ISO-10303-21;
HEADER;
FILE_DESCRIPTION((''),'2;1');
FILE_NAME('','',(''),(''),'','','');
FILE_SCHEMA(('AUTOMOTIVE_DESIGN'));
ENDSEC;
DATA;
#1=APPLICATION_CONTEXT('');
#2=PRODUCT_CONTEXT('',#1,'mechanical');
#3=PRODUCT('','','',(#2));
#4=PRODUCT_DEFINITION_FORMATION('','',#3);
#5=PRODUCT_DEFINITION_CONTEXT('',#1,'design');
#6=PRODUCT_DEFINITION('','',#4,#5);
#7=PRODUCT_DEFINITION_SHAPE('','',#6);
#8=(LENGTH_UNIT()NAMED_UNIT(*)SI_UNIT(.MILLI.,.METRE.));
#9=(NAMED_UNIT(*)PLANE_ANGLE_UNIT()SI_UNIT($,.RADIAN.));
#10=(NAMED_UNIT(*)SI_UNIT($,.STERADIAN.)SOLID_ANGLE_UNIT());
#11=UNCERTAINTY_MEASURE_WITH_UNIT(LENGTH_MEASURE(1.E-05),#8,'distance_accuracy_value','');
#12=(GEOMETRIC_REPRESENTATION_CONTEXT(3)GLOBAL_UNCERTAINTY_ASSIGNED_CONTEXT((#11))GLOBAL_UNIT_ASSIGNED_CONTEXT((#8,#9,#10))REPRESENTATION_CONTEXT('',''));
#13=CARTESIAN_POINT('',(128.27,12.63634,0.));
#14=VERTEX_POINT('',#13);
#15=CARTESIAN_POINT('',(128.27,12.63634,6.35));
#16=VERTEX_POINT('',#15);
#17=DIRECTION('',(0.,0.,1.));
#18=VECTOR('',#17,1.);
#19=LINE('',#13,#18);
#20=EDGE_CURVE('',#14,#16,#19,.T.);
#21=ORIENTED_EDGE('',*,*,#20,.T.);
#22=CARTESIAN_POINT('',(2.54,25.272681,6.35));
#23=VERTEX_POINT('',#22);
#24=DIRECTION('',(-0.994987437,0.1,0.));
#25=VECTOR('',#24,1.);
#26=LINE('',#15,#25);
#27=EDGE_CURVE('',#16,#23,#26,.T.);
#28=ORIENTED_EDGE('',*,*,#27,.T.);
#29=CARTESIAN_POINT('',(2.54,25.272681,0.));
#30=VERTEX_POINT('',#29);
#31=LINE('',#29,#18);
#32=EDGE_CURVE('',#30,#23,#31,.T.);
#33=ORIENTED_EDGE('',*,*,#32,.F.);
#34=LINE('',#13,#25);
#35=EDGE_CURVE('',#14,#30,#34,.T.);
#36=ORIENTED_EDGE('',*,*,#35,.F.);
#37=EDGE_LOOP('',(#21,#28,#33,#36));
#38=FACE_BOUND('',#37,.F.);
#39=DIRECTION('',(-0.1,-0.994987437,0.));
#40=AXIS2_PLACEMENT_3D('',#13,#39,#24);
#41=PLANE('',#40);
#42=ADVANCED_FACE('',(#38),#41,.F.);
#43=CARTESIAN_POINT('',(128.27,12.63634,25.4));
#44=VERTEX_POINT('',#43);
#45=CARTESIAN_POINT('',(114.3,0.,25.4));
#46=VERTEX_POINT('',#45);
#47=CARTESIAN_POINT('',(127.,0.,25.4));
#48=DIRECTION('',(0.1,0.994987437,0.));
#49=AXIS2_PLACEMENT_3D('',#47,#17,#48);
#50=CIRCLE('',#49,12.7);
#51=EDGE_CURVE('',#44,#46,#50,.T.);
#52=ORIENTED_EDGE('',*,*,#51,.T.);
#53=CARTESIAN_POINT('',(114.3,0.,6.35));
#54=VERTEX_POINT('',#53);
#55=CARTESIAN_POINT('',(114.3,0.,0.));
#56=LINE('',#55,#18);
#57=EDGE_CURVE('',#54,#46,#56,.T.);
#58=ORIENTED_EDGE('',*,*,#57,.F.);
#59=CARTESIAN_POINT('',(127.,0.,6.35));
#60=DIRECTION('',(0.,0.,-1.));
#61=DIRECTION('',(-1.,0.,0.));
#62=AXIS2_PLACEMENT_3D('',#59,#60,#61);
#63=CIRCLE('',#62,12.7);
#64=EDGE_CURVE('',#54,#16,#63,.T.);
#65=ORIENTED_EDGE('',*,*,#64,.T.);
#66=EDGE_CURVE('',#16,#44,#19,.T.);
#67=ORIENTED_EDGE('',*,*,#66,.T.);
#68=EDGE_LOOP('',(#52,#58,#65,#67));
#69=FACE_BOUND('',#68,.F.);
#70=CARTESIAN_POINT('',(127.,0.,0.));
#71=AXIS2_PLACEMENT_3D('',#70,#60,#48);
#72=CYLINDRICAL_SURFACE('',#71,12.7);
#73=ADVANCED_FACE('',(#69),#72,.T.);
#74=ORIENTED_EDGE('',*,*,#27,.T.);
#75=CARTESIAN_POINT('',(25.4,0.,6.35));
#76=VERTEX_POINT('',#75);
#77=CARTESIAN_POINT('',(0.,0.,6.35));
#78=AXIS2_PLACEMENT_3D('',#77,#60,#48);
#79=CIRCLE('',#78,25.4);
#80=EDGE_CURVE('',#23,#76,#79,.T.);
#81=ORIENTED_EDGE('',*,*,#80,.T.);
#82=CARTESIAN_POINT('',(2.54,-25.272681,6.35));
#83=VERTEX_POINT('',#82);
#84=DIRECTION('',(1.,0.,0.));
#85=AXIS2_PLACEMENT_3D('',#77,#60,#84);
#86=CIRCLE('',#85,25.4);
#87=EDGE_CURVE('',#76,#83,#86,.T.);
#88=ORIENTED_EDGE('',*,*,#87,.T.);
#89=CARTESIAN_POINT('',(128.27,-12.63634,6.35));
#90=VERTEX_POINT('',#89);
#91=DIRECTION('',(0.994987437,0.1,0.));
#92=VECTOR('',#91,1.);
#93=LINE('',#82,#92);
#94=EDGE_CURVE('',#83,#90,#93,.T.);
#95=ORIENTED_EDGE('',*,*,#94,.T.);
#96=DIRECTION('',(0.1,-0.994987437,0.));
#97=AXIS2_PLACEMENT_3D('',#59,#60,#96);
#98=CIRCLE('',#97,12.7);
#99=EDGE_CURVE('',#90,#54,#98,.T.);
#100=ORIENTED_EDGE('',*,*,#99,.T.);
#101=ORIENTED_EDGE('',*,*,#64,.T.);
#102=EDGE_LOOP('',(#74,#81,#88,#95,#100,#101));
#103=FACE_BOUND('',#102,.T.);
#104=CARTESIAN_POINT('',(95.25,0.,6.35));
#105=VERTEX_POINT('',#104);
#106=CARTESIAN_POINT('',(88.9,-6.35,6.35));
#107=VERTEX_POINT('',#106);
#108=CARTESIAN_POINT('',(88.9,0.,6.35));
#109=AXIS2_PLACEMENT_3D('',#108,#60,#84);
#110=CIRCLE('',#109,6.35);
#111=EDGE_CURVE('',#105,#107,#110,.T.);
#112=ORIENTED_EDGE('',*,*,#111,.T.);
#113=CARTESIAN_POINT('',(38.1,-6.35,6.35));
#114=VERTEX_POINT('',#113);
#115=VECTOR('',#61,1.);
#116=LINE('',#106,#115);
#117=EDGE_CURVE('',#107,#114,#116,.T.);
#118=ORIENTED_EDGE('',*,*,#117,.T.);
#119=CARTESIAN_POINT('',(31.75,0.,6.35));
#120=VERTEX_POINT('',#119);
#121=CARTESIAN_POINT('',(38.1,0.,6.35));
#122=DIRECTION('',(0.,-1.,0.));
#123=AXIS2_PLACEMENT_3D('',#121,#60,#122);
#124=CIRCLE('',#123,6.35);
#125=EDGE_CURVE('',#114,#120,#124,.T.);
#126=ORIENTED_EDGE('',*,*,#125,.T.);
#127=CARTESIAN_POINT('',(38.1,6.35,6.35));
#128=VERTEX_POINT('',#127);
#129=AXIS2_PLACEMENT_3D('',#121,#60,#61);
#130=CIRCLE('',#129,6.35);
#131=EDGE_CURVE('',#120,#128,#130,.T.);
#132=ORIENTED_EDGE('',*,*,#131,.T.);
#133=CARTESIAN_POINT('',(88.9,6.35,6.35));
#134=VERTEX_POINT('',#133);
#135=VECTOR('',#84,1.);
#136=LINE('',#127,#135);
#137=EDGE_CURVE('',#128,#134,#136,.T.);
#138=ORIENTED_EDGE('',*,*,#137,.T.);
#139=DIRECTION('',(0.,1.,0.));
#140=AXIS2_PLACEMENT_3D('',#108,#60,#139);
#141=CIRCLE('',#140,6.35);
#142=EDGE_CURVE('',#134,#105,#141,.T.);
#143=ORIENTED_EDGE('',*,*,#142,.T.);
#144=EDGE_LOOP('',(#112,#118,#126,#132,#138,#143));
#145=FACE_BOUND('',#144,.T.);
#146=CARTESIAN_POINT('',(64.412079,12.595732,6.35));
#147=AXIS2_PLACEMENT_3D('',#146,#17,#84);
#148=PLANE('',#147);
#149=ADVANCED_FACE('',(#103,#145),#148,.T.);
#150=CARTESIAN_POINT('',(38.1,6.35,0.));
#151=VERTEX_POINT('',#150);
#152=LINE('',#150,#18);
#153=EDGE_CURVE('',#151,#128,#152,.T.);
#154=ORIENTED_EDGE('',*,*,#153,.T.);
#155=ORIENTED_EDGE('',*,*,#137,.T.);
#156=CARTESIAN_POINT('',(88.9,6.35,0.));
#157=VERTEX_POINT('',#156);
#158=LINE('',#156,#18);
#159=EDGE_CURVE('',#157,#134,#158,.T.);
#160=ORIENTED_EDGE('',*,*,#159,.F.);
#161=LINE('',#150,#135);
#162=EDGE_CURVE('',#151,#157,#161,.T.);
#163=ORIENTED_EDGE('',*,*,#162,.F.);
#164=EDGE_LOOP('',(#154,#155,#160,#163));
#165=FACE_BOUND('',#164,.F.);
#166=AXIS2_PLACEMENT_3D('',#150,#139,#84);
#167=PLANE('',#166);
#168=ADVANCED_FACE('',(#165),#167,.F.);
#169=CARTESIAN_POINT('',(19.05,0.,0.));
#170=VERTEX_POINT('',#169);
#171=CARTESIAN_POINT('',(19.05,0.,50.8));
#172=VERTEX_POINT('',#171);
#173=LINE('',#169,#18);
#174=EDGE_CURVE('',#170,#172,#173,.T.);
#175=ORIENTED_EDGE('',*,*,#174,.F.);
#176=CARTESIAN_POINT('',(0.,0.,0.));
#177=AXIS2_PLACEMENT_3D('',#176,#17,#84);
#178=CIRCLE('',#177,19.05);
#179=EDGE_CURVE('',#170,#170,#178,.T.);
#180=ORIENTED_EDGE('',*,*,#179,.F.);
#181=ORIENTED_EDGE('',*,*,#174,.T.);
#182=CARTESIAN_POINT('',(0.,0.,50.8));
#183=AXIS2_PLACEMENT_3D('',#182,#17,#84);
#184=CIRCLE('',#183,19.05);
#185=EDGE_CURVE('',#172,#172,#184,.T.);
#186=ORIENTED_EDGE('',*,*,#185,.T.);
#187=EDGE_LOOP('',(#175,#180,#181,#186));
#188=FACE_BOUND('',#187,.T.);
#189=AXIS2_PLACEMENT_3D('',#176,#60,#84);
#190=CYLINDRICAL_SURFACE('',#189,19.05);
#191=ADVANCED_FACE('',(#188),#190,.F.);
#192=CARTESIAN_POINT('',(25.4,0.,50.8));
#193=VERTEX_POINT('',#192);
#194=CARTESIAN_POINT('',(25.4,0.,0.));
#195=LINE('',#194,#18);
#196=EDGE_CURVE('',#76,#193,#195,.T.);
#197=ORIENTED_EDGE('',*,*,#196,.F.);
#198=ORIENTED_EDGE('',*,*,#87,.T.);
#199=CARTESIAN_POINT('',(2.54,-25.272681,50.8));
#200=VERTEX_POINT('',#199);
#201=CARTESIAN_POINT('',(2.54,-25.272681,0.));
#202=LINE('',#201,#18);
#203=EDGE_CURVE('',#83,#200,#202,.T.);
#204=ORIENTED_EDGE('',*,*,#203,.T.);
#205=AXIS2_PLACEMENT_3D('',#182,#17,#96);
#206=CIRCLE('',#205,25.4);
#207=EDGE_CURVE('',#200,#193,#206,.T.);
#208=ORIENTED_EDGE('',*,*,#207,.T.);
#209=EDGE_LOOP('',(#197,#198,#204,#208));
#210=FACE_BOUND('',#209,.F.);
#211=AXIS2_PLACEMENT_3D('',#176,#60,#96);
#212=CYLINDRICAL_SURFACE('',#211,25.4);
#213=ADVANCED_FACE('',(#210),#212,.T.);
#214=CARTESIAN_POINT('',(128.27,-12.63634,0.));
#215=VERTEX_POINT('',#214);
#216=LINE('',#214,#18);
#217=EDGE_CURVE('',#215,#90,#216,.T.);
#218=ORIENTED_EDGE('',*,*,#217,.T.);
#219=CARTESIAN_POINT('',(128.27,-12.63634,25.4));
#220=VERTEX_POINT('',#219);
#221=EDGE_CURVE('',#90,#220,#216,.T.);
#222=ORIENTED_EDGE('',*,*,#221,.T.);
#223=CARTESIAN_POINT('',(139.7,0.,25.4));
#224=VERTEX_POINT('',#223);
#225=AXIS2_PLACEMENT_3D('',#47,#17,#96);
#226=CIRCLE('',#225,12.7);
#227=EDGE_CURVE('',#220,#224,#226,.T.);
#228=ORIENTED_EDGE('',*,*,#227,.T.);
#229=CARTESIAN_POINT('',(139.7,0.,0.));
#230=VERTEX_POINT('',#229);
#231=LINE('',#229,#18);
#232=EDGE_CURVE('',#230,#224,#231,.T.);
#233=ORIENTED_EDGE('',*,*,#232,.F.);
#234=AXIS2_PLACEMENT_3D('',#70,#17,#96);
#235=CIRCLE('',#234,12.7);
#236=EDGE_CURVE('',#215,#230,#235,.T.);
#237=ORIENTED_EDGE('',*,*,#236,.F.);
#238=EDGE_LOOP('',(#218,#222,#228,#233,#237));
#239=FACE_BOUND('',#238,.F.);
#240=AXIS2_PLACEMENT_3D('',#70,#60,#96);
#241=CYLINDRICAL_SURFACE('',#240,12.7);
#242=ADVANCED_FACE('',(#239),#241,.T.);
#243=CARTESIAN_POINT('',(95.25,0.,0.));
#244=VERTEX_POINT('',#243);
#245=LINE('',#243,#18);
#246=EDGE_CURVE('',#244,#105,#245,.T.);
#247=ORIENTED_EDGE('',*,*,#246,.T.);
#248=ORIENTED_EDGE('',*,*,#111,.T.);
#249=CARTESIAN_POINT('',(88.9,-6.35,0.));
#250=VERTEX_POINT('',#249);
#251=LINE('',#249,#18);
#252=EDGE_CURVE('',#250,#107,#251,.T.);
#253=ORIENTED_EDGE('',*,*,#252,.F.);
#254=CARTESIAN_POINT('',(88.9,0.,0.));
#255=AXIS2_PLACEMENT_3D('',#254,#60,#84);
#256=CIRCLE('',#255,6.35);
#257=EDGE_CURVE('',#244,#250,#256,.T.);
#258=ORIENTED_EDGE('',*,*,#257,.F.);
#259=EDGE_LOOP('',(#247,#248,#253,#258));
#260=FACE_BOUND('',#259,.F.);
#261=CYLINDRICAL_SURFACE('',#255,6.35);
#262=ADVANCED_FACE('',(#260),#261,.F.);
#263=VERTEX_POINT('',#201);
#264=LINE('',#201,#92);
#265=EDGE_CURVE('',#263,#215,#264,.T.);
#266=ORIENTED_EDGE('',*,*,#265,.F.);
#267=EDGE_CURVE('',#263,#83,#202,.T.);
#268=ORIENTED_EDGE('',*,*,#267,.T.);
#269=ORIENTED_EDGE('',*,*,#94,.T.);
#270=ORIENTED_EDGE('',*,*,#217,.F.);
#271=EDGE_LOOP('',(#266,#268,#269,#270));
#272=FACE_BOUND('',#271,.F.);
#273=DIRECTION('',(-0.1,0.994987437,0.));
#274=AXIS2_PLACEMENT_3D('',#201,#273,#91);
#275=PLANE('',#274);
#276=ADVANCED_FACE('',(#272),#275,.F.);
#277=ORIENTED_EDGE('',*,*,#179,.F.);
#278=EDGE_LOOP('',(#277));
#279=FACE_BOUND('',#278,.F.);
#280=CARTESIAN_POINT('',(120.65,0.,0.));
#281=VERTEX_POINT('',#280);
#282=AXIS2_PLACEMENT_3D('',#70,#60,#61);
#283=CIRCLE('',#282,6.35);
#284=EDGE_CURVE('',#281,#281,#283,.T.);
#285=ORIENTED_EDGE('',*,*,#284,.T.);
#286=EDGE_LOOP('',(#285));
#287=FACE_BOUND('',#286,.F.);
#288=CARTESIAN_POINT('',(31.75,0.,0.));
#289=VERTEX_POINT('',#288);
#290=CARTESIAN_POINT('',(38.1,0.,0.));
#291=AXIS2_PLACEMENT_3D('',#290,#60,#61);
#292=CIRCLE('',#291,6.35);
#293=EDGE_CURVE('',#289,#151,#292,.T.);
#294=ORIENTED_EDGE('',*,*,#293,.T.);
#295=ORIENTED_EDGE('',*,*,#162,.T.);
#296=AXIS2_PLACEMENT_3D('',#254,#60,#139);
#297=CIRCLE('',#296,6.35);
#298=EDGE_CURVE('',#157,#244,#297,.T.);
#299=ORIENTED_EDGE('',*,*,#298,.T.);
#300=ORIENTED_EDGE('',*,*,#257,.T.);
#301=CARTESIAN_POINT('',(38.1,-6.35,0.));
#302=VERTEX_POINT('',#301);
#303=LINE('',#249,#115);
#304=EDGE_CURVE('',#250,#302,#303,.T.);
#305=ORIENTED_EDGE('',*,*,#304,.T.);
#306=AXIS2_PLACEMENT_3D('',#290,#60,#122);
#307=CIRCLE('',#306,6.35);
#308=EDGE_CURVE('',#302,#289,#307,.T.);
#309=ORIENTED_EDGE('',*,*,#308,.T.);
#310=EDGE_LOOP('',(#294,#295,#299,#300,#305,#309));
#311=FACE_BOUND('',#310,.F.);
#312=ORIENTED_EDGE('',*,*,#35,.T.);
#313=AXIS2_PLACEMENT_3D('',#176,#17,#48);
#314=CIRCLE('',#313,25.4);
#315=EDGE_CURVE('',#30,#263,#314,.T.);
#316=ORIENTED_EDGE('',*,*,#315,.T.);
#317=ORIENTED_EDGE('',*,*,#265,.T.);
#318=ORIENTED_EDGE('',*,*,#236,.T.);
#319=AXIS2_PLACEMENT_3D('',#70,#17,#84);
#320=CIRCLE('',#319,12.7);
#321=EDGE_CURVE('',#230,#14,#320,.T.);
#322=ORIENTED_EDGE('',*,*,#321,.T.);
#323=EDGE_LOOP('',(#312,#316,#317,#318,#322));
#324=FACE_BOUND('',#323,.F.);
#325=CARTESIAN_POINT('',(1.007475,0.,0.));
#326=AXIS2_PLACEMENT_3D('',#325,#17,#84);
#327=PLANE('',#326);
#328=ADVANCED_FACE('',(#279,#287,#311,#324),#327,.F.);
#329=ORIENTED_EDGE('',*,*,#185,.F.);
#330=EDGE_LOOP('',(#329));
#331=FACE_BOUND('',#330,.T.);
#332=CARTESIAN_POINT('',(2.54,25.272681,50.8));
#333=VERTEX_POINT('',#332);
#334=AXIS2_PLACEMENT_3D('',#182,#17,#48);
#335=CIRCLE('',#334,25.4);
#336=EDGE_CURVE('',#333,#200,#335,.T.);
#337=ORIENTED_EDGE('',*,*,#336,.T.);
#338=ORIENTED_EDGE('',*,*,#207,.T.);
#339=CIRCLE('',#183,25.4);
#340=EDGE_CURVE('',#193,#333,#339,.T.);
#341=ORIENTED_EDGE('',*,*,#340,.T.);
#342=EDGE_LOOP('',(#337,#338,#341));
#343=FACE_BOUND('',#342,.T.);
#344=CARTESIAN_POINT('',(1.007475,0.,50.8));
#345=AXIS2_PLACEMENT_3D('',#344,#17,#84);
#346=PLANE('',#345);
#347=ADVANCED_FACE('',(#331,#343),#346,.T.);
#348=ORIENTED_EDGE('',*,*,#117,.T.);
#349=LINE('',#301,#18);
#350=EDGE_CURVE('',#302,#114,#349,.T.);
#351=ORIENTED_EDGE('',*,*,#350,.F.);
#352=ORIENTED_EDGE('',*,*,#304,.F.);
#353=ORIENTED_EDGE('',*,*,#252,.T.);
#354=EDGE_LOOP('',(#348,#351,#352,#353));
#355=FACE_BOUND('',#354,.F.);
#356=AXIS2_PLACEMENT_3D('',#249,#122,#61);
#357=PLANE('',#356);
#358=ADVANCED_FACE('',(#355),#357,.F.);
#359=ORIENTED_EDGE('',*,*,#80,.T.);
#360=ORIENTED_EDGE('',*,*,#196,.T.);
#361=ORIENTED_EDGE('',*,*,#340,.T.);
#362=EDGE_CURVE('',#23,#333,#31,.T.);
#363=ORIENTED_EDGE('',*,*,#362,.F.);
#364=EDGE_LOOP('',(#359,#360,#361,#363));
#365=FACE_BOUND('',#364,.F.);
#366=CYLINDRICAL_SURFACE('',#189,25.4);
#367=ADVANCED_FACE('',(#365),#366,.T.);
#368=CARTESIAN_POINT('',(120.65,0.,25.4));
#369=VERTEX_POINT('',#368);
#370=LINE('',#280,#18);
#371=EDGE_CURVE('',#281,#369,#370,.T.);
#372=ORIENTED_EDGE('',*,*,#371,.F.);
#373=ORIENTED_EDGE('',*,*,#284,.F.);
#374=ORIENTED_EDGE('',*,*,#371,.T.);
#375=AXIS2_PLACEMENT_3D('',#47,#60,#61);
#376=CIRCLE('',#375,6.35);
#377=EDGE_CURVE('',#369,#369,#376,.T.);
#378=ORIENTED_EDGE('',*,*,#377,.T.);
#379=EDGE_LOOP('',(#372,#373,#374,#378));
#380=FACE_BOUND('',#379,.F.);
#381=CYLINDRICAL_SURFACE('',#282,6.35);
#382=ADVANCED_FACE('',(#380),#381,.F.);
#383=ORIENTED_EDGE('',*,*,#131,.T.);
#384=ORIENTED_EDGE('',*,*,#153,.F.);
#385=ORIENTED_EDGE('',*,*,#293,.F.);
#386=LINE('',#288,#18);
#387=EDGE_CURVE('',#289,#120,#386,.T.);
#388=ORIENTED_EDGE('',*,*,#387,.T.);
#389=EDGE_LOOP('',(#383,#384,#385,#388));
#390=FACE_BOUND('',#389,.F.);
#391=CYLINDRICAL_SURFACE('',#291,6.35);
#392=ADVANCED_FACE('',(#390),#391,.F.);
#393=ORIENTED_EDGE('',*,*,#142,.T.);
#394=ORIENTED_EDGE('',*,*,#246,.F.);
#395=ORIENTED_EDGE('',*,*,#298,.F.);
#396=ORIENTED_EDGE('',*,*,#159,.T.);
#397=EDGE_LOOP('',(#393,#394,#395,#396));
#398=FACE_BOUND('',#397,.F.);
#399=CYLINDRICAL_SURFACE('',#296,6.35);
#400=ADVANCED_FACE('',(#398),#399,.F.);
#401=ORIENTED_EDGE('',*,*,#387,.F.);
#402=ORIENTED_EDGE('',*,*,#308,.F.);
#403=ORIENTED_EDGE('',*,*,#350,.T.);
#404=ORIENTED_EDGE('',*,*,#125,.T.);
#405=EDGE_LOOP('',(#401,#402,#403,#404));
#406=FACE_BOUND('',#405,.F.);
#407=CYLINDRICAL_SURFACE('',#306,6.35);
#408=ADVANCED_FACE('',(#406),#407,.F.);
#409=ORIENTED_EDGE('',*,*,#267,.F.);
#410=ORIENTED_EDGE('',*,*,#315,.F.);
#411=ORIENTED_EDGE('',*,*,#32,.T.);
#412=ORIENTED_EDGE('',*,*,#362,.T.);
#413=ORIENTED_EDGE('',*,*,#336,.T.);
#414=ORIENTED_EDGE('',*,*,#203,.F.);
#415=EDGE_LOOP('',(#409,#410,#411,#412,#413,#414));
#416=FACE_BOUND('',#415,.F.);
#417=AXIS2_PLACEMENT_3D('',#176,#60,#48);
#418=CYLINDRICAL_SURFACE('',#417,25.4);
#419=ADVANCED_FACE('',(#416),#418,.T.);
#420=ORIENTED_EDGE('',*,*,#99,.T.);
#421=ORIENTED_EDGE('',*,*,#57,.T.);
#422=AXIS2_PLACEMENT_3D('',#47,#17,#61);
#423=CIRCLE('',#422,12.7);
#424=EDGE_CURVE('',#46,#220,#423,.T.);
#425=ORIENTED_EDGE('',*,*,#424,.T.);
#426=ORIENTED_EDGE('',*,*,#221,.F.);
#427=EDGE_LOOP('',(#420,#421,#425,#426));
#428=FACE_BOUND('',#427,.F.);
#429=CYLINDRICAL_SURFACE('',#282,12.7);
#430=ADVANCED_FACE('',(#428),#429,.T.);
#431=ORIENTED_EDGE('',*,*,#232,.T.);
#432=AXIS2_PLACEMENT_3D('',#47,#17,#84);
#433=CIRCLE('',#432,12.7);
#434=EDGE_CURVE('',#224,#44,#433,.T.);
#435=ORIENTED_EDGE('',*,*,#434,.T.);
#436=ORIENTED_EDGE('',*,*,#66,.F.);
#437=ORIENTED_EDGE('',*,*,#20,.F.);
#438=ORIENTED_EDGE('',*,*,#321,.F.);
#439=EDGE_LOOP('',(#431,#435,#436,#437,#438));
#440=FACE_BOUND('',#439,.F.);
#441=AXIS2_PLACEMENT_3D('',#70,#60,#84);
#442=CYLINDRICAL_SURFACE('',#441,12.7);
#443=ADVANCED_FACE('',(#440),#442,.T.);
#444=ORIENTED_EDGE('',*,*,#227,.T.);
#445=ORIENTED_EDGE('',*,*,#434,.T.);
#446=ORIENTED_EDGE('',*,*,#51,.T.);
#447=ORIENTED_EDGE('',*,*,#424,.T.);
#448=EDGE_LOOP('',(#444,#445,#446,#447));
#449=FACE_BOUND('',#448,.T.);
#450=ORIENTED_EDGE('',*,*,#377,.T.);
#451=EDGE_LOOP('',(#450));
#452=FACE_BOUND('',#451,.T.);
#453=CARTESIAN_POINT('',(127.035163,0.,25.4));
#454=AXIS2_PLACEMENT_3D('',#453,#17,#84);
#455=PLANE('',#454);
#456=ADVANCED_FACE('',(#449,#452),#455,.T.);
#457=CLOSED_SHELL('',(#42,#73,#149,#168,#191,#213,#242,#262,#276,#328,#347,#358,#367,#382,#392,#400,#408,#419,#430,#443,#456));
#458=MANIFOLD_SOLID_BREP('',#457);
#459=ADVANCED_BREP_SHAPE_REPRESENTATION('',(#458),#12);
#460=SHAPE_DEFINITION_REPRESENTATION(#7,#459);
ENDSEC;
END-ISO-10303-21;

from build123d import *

# Parameters (mm, degrees)
F1_DEPTH = 6.35
F2_DEPTH = 25.4
F0_R     = 19.05
F3_DEPTH = 50.8


# Not quite as in the source:
# - a length typed as a fraction of an inch, garbled in the dataset ("3 / 203.2 mm" for 3/8 in), is restored


with BuildPart() as f1:
    # F0 (on Top) → F1 (new body)
    with BuildSketch(Plane.XY):
        with BuildLine():
            ThreePointArc((2.54, 25.2726809025), (18.8371441572, 17.0388379885), (25.4, 0))
            Line((25.4, 0), (31.75, 0))
            ThreePointArc((31.75, 0), (33.6098719395, 4.4901280605), (38.1, 6.35))
            Line((38.1, 6.35), (88.9, 6.35))
            ThreePointArc((88.9, 6.35), (93.3901280605, 4.4901280605), (95.25, 0))
            Line((95.25, 0), (114.3, 0))
            ThreePointArc((114.3, 0), (118.4805810057, 9.4185720786), (128.27, 12.6363404513))
            Line((128.27, 12.6363404513), (2.54, 25.2726809025))
        make_face()
        with BuildLine():
            Line((31.75, 0), (25.4, 0))
            ThreePointArc((25.4, 0), (18.8371441572, -17.0388379885), (2.54, -25.2726809025))
            Line((2.54, -25.2726809025), (128.27, -12.6363404513))
            ThreePointArc((128.27, -12.6363404513), (118.4805810057, -9.4185720786), (114.3, 0))
            Line((114.3, 0), (95.25, 0))
            ThreePointArc((95.25, 0), (93.3901280605, -4.4901280605), (88.9, -6.35))
            Line((88.9, -6.35), (38.1, -6.35))
            ThreePointArc((38.1, -6.35), (33.6098719395, -4.4901280605), (31.75, 0))
        make_face()
    extrude(amount=F1_DEPTH)

    # F0 (on Top) → F2 (join)
    with BuildSketch(Plane.XY):
        with BuildLine():
            ThreePointArc((139.7, 0), (136.4185720786, 8.5194189943), (128.27, 12.6363404513))
            ThreePointArc((128.27, 12.6363404513), (118.4805810057, 9.4185720786), (114.3, 0))
            ThreePointArc((114.3, 0), (118.4805810057, -9.4185720786), (128.27, -12.6363404513))
            ThreePointArc((128.27, -12.6363404513), (136.4185720786, -8.5194189943), (139.7, 0))
        make_face()
        with BuildLine():
            ThreePointArc((133.35, 0), (127, -6.35), (120.65, 0))
            ThreePointArc((120.65, 0), (127, 6.35), (133.35, 0))
        make_face(mode=Mode.SUBTRACT)
    extrude(amount=F2_DEPTH)

    # F0 (on Top) → F3 (join)
    with BuildSketch(Plane.XY):
        with BuildLine():
            ThreePointArc((2.54, -25.2726809025), (18.8371441572, -17.0388379885), (25.4, 0))
            ThreePointArc((25.4, 0), (18.8371441572, 17.0388379885), (2.54, 25.2726809025))
            ThreePointArc((2.54, 25.2726809025), (-25.4, 0), (2.54, -25.2726809025))
        make_face()
        Circle(F0_R, mode=Mode.SUBTRACT)
    extrude(amount=F3_DEPTH)


solid = f1.part
